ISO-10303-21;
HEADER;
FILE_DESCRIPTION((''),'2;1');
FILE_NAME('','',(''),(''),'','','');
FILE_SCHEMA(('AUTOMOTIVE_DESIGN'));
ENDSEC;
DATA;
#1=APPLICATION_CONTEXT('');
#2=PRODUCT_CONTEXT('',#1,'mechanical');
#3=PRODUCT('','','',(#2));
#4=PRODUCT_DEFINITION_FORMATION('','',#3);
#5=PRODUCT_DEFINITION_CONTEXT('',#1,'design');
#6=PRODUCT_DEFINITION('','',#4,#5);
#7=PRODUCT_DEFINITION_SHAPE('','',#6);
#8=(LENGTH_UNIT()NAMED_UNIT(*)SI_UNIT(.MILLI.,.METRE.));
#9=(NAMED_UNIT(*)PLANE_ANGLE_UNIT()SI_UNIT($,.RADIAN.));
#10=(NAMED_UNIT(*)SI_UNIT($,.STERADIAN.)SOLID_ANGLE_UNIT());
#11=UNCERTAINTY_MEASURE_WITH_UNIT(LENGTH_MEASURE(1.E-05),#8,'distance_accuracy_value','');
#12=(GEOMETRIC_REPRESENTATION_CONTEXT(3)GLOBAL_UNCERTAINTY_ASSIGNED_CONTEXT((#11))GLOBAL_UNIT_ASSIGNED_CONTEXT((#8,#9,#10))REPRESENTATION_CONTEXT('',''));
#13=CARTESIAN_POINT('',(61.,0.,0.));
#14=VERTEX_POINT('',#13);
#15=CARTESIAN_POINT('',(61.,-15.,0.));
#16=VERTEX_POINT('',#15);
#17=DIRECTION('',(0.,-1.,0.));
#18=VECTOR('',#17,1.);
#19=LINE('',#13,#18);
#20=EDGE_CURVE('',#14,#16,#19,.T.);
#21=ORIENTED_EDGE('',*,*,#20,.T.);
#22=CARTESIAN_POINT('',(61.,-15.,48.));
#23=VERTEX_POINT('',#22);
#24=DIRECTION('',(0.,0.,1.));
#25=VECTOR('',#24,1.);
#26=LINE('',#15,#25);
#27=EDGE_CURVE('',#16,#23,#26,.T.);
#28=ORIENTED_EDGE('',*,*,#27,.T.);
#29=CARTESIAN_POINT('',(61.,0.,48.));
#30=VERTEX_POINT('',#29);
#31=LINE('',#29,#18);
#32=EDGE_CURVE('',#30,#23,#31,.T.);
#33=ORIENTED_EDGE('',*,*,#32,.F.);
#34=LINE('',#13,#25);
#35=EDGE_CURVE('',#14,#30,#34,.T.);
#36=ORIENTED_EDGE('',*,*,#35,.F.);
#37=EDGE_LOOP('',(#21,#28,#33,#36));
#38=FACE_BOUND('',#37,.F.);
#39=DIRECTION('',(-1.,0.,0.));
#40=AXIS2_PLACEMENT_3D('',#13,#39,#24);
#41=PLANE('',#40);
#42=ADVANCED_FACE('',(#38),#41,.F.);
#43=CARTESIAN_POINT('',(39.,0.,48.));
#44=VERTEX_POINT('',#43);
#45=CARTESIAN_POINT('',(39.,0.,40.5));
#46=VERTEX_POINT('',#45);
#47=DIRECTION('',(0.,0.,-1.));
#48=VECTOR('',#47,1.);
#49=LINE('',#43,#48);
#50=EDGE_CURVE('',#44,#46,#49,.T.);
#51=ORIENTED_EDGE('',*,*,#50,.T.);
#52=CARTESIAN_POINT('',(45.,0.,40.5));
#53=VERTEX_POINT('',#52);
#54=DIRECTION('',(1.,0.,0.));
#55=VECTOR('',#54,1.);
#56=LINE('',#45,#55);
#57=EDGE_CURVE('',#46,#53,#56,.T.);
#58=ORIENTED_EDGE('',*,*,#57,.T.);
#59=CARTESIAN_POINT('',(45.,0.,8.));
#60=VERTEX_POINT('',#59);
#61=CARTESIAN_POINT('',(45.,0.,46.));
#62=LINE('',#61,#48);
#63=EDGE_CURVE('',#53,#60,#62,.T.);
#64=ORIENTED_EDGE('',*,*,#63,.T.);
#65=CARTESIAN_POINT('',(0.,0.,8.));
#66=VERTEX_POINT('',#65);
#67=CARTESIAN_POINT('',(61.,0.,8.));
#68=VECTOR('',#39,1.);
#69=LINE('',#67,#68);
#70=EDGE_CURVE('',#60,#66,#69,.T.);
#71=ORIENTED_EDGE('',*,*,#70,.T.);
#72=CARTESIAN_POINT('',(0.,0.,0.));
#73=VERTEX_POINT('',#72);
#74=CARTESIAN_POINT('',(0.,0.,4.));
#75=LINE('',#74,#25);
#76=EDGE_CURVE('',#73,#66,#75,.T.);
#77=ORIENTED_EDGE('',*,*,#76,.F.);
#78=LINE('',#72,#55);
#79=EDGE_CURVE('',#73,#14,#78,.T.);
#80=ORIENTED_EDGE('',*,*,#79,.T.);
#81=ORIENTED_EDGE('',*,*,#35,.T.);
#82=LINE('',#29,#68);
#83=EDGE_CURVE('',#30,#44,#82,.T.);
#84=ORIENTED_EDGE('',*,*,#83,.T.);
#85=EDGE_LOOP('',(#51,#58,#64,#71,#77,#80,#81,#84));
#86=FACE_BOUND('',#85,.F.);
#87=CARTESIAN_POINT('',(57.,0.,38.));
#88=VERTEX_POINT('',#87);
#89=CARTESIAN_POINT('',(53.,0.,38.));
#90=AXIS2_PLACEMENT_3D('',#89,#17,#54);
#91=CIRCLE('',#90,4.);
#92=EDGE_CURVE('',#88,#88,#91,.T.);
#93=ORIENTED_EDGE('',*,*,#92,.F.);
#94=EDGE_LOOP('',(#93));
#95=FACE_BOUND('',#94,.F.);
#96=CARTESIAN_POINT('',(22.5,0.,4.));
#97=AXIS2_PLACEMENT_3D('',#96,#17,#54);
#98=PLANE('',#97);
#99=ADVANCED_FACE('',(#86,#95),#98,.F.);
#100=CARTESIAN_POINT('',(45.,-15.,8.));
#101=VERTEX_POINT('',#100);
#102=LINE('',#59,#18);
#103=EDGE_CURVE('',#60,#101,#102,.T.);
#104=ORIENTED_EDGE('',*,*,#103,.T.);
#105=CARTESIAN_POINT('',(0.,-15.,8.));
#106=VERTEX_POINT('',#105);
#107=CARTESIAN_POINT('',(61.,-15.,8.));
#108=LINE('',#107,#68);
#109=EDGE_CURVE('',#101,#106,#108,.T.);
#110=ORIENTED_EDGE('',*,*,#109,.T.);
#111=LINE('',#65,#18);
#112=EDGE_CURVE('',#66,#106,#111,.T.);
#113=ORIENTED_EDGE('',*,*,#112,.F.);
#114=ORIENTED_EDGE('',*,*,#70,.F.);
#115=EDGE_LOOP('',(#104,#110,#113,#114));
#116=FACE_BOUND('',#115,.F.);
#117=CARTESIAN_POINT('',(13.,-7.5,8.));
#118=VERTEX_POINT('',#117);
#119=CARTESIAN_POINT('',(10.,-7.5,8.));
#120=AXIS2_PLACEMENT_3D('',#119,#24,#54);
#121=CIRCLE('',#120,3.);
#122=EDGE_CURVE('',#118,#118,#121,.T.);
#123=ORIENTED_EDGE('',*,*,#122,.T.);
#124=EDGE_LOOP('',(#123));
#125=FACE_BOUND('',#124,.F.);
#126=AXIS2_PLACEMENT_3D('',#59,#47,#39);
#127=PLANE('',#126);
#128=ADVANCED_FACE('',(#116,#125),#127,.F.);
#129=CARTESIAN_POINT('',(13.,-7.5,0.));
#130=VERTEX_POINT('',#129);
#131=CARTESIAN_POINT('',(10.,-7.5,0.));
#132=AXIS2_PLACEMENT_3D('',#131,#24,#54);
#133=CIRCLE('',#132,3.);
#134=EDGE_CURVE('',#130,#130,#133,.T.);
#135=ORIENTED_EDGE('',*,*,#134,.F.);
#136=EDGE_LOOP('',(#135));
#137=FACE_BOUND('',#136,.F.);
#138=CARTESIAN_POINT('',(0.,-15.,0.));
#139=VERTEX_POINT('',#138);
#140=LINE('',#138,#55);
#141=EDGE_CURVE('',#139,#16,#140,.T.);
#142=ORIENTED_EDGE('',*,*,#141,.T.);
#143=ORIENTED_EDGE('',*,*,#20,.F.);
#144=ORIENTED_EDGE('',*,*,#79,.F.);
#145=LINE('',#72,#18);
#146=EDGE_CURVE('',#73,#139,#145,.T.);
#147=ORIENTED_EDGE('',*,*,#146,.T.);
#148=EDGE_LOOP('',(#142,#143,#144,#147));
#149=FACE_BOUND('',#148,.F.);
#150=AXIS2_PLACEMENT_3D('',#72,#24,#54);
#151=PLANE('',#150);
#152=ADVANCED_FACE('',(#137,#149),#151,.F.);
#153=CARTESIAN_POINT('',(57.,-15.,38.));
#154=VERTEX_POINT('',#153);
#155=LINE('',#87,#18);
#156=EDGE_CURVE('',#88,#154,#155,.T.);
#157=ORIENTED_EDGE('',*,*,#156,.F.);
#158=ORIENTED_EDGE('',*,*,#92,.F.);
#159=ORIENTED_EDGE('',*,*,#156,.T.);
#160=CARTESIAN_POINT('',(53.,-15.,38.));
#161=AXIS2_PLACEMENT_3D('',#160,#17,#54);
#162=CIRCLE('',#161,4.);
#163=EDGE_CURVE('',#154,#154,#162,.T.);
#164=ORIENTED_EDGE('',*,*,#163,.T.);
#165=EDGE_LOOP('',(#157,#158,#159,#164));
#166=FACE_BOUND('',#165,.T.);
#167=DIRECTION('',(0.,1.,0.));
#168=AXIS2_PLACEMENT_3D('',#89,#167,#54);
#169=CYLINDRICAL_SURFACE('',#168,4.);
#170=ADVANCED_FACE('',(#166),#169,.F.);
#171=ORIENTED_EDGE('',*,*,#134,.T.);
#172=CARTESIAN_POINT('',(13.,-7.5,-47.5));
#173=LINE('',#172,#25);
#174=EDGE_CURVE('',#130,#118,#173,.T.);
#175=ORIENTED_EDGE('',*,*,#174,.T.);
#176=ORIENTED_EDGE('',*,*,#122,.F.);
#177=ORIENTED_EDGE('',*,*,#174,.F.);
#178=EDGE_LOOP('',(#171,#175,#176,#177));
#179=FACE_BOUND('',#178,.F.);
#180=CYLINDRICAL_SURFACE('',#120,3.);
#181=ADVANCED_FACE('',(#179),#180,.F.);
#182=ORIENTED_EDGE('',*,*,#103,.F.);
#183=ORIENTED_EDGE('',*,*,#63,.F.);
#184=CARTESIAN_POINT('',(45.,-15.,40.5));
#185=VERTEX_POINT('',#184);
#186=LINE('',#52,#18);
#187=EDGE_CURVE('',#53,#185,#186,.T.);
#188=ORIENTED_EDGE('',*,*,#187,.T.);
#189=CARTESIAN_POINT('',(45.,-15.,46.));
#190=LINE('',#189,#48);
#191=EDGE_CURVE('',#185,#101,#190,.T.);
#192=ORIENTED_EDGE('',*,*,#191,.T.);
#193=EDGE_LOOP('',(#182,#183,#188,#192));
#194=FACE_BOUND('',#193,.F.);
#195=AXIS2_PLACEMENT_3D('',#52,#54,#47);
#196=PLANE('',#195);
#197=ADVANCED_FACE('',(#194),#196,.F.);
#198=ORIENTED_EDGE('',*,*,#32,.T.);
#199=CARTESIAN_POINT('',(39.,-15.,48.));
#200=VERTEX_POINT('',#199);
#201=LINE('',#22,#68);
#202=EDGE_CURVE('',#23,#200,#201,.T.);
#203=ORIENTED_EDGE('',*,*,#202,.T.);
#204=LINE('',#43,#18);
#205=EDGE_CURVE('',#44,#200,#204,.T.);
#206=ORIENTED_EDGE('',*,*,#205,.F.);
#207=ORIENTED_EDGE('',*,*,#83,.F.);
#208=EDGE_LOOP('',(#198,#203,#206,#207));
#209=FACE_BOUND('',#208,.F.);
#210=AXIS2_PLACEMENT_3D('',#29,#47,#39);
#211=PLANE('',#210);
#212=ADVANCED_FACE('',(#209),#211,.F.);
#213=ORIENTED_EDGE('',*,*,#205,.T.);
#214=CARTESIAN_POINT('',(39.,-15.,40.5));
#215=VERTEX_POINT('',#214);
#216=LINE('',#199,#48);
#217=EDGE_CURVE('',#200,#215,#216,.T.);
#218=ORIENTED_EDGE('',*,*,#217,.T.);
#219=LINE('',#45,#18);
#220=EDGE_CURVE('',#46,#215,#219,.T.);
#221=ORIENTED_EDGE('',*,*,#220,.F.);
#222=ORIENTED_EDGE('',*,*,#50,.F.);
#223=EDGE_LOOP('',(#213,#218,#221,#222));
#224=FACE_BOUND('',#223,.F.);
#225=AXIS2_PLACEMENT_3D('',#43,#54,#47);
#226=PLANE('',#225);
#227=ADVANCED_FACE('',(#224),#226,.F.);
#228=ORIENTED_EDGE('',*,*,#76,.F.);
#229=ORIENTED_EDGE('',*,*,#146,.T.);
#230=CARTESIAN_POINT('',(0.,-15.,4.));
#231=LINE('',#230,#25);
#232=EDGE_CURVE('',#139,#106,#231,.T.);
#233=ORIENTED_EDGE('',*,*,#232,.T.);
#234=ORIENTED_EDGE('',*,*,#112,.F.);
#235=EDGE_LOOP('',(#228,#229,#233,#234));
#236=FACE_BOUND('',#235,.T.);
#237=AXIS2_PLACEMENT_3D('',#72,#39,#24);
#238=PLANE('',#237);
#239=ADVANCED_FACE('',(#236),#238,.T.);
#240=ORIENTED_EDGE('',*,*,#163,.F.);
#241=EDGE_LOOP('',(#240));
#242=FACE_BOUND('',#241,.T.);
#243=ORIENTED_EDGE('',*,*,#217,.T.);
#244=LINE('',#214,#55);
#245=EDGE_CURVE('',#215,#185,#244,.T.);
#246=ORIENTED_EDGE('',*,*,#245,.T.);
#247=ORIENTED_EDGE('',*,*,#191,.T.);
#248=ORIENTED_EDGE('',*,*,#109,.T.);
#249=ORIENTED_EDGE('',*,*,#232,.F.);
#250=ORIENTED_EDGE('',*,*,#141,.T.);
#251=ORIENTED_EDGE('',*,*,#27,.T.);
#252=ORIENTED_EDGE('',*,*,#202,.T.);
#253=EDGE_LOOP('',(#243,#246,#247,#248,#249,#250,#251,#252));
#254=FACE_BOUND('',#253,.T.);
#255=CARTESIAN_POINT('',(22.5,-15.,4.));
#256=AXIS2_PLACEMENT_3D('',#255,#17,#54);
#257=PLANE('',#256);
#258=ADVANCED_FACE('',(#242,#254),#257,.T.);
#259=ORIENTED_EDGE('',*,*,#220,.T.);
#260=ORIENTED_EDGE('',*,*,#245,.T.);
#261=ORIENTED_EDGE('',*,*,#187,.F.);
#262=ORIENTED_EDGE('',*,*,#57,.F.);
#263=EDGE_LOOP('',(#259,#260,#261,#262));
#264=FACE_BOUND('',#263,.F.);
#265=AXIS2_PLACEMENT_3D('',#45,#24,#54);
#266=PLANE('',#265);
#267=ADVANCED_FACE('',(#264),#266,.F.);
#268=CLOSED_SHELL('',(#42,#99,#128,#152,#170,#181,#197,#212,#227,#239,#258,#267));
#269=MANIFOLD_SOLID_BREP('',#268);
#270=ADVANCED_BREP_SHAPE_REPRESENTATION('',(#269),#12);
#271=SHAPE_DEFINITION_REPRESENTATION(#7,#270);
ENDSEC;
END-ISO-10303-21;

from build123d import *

# Parameters (mm, degrees)
F0_W     = 45
F0_H     = 8
F0_W_2   = 16
F0_R     = 4
F0_H_2   = 2
F1_DEPTH = 15
F2_R     = 3
F3_DEPTH = 55.5


# Not quite as in the source:
# - a feature names something its author has since deleted; it is built from what else it names


with BuildPart() as f1:
    # F0 (on Front) → F1 (new body)
    with BuildSketch(Plane.XZ):
        with Locations((22.5, 4)):
            Rectangle(F0_W, F0_H)
        with Locations((53, 4)):
            Rectangle(F0_W_2, F0_H)
        Polygon((45, 40.5), (45, 8), (61, 8), (61, 46), (45, 46), align=None)
        with Locations((53, 38)):
            Circle(F0_R, mode=Mode.SUBTRACT)
        Polygon((39, 40.5), (45, 40.5), (45, 46), (45, 48), (39, 48), align=None)
        with Locations((53, 47)):
            Rectangle(F0_W_2, F0_H_2)
    extrude(amount=F1_DEPTH)

    # F2 (on face) → F3 (cut, symmetric)
    with BuildSketch(Plane.XY.offset(8)):
        with Locations((10, -7.5)):
            Circle(F2_R)
    extrude(amount=F3_DEPTH, both=True, mode=Mode.SUBTRACT)


solid = f1.part
